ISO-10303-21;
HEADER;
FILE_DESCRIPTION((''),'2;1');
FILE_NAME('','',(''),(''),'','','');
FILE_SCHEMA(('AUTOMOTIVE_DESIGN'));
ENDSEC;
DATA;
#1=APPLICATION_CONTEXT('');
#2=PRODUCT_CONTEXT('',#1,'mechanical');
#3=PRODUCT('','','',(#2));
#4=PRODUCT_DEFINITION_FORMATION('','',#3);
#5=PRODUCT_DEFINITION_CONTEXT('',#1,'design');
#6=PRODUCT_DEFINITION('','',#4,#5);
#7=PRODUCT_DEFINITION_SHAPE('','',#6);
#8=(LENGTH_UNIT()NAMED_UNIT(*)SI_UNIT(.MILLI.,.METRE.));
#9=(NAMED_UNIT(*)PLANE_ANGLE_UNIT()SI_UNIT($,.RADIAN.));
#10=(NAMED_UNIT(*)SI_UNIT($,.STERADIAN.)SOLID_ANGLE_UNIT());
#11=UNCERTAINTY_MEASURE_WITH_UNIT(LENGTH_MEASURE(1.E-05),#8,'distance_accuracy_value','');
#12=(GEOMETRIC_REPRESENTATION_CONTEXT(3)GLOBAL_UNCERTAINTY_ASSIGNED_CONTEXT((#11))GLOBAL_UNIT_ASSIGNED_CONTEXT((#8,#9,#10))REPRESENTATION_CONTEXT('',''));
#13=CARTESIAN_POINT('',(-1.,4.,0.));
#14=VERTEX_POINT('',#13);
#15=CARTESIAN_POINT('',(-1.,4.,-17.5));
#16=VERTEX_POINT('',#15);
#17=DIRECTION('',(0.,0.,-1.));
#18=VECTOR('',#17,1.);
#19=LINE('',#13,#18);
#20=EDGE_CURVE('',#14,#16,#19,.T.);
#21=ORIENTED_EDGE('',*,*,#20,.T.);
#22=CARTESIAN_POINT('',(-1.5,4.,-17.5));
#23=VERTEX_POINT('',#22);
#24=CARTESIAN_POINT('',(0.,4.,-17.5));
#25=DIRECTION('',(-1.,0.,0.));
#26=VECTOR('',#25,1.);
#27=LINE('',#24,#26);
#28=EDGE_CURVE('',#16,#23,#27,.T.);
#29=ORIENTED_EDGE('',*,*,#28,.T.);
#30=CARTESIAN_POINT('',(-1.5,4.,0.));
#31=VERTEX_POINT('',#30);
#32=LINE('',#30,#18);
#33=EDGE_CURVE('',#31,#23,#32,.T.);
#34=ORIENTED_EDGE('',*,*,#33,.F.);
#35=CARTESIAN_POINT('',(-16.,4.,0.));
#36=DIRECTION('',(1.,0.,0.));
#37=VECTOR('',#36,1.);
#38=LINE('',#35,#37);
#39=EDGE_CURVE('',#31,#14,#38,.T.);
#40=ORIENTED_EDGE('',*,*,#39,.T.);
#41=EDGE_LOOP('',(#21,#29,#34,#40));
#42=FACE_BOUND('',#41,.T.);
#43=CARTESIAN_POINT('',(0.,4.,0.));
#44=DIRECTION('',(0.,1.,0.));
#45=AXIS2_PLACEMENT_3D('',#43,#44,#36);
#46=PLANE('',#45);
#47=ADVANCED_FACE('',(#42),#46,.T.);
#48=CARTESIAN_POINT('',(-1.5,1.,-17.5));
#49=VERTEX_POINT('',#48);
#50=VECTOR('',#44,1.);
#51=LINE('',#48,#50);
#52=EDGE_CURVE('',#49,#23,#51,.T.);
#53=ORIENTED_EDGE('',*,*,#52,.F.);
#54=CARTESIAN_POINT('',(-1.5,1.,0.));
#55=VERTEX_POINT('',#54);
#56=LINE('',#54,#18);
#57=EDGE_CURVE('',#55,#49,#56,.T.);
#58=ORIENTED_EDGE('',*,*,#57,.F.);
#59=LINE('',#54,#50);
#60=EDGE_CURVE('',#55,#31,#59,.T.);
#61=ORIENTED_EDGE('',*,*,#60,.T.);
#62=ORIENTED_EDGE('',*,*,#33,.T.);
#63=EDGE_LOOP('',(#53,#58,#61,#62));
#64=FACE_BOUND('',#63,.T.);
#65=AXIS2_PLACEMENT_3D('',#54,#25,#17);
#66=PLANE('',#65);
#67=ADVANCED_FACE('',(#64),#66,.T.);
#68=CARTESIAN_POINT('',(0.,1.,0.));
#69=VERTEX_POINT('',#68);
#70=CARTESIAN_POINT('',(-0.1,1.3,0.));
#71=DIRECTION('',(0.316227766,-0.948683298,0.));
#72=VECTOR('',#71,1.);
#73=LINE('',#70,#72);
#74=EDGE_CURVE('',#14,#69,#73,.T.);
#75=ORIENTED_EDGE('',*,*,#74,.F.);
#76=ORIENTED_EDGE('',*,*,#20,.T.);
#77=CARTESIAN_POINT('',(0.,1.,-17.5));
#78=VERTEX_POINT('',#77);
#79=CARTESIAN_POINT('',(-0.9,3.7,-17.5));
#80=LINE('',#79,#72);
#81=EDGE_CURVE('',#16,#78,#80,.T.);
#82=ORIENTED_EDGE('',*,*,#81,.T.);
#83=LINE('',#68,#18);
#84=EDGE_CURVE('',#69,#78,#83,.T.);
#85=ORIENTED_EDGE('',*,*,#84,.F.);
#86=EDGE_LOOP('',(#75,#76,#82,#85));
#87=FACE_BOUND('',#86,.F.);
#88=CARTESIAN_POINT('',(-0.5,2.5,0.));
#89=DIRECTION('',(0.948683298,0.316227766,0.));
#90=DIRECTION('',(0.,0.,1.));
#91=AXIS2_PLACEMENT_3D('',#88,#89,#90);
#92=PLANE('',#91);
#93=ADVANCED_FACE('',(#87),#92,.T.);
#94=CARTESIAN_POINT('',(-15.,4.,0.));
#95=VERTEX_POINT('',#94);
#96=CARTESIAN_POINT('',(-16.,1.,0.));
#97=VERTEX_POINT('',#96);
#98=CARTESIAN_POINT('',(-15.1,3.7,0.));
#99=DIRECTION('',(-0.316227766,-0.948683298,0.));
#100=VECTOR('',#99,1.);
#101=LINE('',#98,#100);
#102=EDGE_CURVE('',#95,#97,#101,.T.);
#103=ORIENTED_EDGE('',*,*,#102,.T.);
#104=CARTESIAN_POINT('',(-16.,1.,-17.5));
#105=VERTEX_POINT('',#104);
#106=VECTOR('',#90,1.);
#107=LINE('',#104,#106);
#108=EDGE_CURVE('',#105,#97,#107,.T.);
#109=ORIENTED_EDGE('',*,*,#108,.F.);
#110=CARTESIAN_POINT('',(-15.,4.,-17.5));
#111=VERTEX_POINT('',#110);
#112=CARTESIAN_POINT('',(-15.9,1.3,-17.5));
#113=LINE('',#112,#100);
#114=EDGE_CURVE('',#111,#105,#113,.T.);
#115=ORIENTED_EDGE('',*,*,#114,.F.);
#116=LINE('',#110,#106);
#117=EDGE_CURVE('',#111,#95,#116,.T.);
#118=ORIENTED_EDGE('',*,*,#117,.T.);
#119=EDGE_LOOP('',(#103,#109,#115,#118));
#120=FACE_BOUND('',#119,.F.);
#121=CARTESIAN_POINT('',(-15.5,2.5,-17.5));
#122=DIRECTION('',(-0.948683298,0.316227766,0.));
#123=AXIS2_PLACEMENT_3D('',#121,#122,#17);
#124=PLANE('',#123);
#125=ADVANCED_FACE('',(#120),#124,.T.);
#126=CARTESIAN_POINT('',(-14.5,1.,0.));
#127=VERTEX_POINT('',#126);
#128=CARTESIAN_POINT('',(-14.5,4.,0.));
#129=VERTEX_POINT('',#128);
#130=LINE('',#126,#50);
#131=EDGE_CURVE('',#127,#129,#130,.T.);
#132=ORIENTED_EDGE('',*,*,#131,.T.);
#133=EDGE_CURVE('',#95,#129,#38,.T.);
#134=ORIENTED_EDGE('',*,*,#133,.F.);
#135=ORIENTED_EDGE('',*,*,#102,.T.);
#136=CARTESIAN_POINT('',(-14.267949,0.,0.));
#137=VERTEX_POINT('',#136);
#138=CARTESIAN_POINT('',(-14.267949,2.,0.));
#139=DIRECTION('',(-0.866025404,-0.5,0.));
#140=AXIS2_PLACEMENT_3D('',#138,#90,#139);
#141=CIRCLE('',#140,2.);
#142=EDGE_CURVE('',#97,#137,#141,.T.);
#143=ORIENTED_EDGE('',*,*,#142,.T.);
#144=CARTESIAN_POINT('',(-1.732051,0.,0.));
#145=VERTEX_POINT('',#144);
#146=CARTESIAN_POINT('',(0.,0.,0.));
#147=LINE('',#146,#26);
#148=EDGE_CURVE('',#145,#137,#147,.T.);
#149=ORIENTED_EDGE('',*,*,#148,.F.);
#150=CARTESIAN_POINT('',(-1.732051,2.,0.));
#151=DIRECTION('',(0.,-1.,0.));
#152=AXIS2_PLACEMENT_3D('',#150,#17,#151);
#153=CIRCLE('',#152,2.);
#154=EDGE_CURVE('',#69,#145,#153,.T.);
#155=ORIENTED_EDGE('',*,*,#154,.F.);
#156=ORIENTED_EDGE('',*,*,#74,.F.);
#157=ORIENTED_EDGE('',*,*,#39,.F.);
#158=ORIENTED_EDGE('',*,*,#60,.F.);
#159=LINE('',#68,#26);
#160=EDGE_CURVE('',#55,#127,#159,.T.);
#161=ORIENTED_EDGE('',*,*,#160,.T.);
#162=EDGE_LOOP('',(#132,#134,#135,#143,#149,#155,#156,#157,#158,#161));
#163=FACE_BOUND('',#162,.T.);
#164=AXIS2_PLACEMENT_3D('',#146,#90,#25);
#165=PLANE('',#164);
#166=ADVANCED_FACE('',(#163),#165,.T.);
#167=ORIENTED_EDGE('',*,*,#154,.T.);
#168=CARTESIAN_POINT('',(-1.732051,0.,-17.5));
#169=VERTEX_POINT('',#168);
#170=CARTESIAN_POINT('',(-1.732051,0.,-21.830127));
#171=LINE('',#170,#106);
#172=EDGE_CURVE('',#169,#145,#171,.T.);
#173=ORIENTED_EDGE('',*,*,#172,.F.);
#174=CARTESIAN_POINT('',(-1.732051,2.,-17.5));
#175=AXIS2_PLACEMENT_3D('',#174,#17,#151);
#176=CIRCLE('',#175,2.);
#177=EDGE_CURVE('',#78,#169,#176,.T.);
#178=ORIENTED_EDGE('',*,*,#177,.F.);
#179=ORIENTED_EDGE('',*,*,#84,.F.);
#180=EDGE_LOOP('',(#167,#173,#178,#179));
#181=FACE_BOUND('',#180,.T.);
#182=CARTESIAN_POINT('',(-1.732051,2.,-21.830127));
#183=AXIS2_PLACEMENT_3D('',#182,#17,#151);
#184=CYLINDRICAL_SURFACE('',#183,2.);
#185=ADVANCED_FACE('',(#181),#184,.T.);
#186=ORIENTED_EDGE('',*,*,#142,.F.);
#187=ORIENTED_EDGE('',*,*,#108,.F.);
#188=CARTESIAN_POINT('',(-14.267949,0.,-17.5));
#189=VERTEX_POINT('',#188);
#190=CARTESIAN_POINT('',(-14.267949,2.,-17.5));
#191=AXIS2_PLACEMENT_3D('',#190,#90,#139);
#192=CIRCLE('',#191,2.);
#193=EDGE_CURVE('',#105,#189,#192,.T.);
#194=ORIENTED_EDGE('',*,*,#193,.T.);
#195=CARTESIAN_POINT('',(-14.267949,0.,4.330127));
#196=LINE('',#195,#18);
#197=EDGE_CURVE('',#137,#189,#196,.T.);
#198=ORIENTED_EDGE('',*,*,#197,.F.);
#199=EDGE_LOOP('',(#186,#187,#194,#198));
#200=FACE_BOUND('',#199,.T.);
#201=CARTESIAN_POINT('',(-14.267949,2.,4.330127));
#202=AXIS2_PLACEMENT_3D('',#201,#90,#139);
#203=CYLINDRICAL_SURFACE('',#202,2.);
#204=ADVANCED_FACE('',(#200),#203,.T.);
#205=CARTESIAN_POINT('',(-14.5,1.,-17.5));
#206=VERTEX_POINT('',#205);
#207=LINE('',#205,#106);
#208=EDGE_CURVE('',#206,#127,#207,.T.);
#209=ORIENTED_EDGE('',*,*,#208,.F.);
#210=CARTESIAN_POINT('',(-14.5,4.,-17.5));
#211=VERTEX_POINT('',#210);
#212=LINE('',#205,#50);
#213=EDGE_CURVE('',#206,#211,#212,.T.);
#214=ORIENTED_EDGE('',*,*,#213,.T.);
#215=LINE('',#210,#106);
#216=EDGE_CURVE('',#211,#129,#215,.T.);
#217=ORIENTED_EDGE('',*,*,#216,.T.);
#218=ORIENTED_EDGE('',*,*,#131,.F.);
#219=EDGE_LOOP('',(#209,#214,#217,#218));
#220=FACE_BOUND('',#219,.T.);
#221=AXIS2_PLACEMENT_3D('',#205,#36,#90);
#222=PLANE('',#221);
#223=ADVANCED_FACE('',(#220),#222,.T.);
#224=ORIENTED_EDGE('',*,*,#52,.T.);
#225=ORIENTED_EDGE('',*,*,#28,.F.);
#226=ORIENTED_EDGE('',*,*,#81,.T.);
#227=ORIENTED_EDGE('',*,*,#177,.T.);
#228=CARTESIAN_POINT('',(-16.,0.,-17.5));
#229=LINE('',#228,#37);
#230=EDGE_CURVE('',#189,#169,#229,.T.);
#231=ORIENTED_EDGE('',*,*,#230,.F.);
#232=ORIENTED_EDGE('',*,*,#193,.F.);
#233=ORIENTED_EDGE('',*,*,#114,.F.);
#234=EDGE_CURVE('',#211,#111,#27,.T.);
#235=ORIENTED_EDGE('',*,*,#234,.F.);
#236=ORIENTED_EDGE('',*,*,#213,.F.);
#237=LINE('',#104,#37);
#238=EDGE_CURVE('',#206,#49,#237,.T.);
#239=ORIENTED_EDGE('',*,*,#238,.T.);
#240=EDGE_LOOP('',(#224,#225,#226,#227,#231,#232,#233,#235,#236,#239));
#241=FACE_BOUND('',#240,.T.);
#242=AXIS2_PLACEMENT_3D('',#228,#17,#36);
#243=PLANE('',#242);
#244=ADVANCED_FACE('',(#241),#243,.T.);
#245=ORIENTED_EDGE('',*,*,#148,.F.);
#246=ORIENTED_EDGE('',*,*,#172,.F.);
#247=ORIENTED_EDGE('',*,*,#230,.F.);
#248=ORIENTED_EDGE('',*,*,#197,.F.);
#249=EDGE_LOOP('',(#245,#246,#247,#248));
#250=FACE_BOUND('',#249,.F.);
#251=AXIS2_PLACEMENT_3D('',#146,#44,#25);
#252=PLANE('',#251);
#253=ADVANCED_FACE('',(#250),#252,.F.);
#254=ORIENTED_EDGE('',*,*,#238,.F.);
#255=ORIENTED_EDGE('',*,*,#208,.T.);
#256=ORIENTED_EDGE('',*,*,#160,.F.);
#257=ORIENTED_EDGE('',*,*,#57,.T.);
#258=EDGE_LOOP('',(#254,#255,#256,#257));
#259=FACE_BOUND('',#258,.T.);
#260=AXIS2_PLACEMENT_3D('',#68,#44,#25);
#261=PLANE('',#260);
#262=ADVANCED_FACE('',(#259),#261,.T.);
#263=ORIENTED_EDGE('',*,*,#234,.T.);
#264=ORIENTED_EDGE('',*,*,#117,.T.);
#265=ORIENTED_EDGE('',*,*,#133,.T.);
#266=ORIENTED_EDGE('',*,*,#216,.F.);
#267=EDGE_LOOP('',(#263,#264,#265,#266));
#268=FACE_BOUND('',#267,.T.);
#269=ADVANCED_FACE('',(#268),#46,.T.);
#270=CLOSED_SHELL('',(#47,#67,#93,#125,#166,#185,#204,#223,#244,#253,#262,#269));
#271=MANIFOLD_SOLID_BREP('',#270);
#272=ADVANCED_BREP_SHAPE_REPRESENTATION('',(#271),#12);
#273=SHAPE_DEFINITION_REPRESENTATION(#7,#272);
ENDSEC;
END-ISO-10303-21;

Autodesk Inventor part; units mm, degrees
ref_plane "YZ Plane" through (0, 0, 0) normal (1, 0, 0) x (0, 1, 0)
ref_plane "XZ Plane" through (0, 0, 0) normal (0, 1, 0) x (-1, 0, 0)
ref_plane "XY Plane" through (0, 0, 0) normal (0, 0, 1) x (1, 0, 0)
sketch "스케치1" plane through (0, 0, 0) normal (0, 1, 0) x (-1, 0, 0)
  line L0 (0, 0) -> (16, 0)
  line L1 (16, 0) -> (16, -17.5)
  line L2 (16, -17.5) -> (0, -17.5)
  line L3 (0, -17.5) -> (0, 0)
  dimension "d0" = 16
  dimension "d1" = 17.5
extrude "돌출1" add sketch "스케치1" along normal blind 1
sketch "스케치2" plane through (0, 1, 0) normal (0, 1, 0) x (1, 0, 0)
  line L0 (-16, 0) -> (0, 0) projected
  line L1 (0, 0) -> (0, 17.5) projected
  line L2 (0, 17.5) -> (-16, 17.5) projected
  line L3 (-16, 17.5) -> (-16, 0) projected
  line L4 (-16, 0) -> (0, 0) projected
  line L5 (-16, 17.5) -> (-14.5, 17.5)
  line L6 (-14.5, 17.5) -> (-14.5, 0)
  line L7 (-14.5, 0) -> (-16, 0)
  line L8 (-16, 0) -> (-16, 17.5)
  line L9 (0, 17.5) -> (-16, 17.5) projected
  line L10 (0, 0) -> (-1.5, 0)
  line L11 (-1.5, 0) -> (-1.5, 17.5)
  line L12 (-1.5, 17.5) -> (0, 17.5)
  line L13 (0, 17.5) -> (0, 0)
  point P0 (-1.5, 0)
  point P1 (-14.5, 0)
  dimension "d4" = 1.5
  dimension "d5" = 1.5
extrude "돌출2" add sketch "스케치2" along normal blind 3 contours L3 L2 L6 L0 | L11 L2 L1 L0
chamfer "모따기1" distance 1 distance2 3 1 edges at (0, 4, -8.75) measured on face at (-1, 4, -11.6667)
chamfer "모따기2" distance 1 distance2 3 1 edges at (-16, 4, -8.75) measured on face at (-15, 4, -5.8333)
fillet "모깎기1" radius 2 2 edges at (-16, 0, -8.75) (0, 0, -8.75)
properties part number "_3D 인쇄"
